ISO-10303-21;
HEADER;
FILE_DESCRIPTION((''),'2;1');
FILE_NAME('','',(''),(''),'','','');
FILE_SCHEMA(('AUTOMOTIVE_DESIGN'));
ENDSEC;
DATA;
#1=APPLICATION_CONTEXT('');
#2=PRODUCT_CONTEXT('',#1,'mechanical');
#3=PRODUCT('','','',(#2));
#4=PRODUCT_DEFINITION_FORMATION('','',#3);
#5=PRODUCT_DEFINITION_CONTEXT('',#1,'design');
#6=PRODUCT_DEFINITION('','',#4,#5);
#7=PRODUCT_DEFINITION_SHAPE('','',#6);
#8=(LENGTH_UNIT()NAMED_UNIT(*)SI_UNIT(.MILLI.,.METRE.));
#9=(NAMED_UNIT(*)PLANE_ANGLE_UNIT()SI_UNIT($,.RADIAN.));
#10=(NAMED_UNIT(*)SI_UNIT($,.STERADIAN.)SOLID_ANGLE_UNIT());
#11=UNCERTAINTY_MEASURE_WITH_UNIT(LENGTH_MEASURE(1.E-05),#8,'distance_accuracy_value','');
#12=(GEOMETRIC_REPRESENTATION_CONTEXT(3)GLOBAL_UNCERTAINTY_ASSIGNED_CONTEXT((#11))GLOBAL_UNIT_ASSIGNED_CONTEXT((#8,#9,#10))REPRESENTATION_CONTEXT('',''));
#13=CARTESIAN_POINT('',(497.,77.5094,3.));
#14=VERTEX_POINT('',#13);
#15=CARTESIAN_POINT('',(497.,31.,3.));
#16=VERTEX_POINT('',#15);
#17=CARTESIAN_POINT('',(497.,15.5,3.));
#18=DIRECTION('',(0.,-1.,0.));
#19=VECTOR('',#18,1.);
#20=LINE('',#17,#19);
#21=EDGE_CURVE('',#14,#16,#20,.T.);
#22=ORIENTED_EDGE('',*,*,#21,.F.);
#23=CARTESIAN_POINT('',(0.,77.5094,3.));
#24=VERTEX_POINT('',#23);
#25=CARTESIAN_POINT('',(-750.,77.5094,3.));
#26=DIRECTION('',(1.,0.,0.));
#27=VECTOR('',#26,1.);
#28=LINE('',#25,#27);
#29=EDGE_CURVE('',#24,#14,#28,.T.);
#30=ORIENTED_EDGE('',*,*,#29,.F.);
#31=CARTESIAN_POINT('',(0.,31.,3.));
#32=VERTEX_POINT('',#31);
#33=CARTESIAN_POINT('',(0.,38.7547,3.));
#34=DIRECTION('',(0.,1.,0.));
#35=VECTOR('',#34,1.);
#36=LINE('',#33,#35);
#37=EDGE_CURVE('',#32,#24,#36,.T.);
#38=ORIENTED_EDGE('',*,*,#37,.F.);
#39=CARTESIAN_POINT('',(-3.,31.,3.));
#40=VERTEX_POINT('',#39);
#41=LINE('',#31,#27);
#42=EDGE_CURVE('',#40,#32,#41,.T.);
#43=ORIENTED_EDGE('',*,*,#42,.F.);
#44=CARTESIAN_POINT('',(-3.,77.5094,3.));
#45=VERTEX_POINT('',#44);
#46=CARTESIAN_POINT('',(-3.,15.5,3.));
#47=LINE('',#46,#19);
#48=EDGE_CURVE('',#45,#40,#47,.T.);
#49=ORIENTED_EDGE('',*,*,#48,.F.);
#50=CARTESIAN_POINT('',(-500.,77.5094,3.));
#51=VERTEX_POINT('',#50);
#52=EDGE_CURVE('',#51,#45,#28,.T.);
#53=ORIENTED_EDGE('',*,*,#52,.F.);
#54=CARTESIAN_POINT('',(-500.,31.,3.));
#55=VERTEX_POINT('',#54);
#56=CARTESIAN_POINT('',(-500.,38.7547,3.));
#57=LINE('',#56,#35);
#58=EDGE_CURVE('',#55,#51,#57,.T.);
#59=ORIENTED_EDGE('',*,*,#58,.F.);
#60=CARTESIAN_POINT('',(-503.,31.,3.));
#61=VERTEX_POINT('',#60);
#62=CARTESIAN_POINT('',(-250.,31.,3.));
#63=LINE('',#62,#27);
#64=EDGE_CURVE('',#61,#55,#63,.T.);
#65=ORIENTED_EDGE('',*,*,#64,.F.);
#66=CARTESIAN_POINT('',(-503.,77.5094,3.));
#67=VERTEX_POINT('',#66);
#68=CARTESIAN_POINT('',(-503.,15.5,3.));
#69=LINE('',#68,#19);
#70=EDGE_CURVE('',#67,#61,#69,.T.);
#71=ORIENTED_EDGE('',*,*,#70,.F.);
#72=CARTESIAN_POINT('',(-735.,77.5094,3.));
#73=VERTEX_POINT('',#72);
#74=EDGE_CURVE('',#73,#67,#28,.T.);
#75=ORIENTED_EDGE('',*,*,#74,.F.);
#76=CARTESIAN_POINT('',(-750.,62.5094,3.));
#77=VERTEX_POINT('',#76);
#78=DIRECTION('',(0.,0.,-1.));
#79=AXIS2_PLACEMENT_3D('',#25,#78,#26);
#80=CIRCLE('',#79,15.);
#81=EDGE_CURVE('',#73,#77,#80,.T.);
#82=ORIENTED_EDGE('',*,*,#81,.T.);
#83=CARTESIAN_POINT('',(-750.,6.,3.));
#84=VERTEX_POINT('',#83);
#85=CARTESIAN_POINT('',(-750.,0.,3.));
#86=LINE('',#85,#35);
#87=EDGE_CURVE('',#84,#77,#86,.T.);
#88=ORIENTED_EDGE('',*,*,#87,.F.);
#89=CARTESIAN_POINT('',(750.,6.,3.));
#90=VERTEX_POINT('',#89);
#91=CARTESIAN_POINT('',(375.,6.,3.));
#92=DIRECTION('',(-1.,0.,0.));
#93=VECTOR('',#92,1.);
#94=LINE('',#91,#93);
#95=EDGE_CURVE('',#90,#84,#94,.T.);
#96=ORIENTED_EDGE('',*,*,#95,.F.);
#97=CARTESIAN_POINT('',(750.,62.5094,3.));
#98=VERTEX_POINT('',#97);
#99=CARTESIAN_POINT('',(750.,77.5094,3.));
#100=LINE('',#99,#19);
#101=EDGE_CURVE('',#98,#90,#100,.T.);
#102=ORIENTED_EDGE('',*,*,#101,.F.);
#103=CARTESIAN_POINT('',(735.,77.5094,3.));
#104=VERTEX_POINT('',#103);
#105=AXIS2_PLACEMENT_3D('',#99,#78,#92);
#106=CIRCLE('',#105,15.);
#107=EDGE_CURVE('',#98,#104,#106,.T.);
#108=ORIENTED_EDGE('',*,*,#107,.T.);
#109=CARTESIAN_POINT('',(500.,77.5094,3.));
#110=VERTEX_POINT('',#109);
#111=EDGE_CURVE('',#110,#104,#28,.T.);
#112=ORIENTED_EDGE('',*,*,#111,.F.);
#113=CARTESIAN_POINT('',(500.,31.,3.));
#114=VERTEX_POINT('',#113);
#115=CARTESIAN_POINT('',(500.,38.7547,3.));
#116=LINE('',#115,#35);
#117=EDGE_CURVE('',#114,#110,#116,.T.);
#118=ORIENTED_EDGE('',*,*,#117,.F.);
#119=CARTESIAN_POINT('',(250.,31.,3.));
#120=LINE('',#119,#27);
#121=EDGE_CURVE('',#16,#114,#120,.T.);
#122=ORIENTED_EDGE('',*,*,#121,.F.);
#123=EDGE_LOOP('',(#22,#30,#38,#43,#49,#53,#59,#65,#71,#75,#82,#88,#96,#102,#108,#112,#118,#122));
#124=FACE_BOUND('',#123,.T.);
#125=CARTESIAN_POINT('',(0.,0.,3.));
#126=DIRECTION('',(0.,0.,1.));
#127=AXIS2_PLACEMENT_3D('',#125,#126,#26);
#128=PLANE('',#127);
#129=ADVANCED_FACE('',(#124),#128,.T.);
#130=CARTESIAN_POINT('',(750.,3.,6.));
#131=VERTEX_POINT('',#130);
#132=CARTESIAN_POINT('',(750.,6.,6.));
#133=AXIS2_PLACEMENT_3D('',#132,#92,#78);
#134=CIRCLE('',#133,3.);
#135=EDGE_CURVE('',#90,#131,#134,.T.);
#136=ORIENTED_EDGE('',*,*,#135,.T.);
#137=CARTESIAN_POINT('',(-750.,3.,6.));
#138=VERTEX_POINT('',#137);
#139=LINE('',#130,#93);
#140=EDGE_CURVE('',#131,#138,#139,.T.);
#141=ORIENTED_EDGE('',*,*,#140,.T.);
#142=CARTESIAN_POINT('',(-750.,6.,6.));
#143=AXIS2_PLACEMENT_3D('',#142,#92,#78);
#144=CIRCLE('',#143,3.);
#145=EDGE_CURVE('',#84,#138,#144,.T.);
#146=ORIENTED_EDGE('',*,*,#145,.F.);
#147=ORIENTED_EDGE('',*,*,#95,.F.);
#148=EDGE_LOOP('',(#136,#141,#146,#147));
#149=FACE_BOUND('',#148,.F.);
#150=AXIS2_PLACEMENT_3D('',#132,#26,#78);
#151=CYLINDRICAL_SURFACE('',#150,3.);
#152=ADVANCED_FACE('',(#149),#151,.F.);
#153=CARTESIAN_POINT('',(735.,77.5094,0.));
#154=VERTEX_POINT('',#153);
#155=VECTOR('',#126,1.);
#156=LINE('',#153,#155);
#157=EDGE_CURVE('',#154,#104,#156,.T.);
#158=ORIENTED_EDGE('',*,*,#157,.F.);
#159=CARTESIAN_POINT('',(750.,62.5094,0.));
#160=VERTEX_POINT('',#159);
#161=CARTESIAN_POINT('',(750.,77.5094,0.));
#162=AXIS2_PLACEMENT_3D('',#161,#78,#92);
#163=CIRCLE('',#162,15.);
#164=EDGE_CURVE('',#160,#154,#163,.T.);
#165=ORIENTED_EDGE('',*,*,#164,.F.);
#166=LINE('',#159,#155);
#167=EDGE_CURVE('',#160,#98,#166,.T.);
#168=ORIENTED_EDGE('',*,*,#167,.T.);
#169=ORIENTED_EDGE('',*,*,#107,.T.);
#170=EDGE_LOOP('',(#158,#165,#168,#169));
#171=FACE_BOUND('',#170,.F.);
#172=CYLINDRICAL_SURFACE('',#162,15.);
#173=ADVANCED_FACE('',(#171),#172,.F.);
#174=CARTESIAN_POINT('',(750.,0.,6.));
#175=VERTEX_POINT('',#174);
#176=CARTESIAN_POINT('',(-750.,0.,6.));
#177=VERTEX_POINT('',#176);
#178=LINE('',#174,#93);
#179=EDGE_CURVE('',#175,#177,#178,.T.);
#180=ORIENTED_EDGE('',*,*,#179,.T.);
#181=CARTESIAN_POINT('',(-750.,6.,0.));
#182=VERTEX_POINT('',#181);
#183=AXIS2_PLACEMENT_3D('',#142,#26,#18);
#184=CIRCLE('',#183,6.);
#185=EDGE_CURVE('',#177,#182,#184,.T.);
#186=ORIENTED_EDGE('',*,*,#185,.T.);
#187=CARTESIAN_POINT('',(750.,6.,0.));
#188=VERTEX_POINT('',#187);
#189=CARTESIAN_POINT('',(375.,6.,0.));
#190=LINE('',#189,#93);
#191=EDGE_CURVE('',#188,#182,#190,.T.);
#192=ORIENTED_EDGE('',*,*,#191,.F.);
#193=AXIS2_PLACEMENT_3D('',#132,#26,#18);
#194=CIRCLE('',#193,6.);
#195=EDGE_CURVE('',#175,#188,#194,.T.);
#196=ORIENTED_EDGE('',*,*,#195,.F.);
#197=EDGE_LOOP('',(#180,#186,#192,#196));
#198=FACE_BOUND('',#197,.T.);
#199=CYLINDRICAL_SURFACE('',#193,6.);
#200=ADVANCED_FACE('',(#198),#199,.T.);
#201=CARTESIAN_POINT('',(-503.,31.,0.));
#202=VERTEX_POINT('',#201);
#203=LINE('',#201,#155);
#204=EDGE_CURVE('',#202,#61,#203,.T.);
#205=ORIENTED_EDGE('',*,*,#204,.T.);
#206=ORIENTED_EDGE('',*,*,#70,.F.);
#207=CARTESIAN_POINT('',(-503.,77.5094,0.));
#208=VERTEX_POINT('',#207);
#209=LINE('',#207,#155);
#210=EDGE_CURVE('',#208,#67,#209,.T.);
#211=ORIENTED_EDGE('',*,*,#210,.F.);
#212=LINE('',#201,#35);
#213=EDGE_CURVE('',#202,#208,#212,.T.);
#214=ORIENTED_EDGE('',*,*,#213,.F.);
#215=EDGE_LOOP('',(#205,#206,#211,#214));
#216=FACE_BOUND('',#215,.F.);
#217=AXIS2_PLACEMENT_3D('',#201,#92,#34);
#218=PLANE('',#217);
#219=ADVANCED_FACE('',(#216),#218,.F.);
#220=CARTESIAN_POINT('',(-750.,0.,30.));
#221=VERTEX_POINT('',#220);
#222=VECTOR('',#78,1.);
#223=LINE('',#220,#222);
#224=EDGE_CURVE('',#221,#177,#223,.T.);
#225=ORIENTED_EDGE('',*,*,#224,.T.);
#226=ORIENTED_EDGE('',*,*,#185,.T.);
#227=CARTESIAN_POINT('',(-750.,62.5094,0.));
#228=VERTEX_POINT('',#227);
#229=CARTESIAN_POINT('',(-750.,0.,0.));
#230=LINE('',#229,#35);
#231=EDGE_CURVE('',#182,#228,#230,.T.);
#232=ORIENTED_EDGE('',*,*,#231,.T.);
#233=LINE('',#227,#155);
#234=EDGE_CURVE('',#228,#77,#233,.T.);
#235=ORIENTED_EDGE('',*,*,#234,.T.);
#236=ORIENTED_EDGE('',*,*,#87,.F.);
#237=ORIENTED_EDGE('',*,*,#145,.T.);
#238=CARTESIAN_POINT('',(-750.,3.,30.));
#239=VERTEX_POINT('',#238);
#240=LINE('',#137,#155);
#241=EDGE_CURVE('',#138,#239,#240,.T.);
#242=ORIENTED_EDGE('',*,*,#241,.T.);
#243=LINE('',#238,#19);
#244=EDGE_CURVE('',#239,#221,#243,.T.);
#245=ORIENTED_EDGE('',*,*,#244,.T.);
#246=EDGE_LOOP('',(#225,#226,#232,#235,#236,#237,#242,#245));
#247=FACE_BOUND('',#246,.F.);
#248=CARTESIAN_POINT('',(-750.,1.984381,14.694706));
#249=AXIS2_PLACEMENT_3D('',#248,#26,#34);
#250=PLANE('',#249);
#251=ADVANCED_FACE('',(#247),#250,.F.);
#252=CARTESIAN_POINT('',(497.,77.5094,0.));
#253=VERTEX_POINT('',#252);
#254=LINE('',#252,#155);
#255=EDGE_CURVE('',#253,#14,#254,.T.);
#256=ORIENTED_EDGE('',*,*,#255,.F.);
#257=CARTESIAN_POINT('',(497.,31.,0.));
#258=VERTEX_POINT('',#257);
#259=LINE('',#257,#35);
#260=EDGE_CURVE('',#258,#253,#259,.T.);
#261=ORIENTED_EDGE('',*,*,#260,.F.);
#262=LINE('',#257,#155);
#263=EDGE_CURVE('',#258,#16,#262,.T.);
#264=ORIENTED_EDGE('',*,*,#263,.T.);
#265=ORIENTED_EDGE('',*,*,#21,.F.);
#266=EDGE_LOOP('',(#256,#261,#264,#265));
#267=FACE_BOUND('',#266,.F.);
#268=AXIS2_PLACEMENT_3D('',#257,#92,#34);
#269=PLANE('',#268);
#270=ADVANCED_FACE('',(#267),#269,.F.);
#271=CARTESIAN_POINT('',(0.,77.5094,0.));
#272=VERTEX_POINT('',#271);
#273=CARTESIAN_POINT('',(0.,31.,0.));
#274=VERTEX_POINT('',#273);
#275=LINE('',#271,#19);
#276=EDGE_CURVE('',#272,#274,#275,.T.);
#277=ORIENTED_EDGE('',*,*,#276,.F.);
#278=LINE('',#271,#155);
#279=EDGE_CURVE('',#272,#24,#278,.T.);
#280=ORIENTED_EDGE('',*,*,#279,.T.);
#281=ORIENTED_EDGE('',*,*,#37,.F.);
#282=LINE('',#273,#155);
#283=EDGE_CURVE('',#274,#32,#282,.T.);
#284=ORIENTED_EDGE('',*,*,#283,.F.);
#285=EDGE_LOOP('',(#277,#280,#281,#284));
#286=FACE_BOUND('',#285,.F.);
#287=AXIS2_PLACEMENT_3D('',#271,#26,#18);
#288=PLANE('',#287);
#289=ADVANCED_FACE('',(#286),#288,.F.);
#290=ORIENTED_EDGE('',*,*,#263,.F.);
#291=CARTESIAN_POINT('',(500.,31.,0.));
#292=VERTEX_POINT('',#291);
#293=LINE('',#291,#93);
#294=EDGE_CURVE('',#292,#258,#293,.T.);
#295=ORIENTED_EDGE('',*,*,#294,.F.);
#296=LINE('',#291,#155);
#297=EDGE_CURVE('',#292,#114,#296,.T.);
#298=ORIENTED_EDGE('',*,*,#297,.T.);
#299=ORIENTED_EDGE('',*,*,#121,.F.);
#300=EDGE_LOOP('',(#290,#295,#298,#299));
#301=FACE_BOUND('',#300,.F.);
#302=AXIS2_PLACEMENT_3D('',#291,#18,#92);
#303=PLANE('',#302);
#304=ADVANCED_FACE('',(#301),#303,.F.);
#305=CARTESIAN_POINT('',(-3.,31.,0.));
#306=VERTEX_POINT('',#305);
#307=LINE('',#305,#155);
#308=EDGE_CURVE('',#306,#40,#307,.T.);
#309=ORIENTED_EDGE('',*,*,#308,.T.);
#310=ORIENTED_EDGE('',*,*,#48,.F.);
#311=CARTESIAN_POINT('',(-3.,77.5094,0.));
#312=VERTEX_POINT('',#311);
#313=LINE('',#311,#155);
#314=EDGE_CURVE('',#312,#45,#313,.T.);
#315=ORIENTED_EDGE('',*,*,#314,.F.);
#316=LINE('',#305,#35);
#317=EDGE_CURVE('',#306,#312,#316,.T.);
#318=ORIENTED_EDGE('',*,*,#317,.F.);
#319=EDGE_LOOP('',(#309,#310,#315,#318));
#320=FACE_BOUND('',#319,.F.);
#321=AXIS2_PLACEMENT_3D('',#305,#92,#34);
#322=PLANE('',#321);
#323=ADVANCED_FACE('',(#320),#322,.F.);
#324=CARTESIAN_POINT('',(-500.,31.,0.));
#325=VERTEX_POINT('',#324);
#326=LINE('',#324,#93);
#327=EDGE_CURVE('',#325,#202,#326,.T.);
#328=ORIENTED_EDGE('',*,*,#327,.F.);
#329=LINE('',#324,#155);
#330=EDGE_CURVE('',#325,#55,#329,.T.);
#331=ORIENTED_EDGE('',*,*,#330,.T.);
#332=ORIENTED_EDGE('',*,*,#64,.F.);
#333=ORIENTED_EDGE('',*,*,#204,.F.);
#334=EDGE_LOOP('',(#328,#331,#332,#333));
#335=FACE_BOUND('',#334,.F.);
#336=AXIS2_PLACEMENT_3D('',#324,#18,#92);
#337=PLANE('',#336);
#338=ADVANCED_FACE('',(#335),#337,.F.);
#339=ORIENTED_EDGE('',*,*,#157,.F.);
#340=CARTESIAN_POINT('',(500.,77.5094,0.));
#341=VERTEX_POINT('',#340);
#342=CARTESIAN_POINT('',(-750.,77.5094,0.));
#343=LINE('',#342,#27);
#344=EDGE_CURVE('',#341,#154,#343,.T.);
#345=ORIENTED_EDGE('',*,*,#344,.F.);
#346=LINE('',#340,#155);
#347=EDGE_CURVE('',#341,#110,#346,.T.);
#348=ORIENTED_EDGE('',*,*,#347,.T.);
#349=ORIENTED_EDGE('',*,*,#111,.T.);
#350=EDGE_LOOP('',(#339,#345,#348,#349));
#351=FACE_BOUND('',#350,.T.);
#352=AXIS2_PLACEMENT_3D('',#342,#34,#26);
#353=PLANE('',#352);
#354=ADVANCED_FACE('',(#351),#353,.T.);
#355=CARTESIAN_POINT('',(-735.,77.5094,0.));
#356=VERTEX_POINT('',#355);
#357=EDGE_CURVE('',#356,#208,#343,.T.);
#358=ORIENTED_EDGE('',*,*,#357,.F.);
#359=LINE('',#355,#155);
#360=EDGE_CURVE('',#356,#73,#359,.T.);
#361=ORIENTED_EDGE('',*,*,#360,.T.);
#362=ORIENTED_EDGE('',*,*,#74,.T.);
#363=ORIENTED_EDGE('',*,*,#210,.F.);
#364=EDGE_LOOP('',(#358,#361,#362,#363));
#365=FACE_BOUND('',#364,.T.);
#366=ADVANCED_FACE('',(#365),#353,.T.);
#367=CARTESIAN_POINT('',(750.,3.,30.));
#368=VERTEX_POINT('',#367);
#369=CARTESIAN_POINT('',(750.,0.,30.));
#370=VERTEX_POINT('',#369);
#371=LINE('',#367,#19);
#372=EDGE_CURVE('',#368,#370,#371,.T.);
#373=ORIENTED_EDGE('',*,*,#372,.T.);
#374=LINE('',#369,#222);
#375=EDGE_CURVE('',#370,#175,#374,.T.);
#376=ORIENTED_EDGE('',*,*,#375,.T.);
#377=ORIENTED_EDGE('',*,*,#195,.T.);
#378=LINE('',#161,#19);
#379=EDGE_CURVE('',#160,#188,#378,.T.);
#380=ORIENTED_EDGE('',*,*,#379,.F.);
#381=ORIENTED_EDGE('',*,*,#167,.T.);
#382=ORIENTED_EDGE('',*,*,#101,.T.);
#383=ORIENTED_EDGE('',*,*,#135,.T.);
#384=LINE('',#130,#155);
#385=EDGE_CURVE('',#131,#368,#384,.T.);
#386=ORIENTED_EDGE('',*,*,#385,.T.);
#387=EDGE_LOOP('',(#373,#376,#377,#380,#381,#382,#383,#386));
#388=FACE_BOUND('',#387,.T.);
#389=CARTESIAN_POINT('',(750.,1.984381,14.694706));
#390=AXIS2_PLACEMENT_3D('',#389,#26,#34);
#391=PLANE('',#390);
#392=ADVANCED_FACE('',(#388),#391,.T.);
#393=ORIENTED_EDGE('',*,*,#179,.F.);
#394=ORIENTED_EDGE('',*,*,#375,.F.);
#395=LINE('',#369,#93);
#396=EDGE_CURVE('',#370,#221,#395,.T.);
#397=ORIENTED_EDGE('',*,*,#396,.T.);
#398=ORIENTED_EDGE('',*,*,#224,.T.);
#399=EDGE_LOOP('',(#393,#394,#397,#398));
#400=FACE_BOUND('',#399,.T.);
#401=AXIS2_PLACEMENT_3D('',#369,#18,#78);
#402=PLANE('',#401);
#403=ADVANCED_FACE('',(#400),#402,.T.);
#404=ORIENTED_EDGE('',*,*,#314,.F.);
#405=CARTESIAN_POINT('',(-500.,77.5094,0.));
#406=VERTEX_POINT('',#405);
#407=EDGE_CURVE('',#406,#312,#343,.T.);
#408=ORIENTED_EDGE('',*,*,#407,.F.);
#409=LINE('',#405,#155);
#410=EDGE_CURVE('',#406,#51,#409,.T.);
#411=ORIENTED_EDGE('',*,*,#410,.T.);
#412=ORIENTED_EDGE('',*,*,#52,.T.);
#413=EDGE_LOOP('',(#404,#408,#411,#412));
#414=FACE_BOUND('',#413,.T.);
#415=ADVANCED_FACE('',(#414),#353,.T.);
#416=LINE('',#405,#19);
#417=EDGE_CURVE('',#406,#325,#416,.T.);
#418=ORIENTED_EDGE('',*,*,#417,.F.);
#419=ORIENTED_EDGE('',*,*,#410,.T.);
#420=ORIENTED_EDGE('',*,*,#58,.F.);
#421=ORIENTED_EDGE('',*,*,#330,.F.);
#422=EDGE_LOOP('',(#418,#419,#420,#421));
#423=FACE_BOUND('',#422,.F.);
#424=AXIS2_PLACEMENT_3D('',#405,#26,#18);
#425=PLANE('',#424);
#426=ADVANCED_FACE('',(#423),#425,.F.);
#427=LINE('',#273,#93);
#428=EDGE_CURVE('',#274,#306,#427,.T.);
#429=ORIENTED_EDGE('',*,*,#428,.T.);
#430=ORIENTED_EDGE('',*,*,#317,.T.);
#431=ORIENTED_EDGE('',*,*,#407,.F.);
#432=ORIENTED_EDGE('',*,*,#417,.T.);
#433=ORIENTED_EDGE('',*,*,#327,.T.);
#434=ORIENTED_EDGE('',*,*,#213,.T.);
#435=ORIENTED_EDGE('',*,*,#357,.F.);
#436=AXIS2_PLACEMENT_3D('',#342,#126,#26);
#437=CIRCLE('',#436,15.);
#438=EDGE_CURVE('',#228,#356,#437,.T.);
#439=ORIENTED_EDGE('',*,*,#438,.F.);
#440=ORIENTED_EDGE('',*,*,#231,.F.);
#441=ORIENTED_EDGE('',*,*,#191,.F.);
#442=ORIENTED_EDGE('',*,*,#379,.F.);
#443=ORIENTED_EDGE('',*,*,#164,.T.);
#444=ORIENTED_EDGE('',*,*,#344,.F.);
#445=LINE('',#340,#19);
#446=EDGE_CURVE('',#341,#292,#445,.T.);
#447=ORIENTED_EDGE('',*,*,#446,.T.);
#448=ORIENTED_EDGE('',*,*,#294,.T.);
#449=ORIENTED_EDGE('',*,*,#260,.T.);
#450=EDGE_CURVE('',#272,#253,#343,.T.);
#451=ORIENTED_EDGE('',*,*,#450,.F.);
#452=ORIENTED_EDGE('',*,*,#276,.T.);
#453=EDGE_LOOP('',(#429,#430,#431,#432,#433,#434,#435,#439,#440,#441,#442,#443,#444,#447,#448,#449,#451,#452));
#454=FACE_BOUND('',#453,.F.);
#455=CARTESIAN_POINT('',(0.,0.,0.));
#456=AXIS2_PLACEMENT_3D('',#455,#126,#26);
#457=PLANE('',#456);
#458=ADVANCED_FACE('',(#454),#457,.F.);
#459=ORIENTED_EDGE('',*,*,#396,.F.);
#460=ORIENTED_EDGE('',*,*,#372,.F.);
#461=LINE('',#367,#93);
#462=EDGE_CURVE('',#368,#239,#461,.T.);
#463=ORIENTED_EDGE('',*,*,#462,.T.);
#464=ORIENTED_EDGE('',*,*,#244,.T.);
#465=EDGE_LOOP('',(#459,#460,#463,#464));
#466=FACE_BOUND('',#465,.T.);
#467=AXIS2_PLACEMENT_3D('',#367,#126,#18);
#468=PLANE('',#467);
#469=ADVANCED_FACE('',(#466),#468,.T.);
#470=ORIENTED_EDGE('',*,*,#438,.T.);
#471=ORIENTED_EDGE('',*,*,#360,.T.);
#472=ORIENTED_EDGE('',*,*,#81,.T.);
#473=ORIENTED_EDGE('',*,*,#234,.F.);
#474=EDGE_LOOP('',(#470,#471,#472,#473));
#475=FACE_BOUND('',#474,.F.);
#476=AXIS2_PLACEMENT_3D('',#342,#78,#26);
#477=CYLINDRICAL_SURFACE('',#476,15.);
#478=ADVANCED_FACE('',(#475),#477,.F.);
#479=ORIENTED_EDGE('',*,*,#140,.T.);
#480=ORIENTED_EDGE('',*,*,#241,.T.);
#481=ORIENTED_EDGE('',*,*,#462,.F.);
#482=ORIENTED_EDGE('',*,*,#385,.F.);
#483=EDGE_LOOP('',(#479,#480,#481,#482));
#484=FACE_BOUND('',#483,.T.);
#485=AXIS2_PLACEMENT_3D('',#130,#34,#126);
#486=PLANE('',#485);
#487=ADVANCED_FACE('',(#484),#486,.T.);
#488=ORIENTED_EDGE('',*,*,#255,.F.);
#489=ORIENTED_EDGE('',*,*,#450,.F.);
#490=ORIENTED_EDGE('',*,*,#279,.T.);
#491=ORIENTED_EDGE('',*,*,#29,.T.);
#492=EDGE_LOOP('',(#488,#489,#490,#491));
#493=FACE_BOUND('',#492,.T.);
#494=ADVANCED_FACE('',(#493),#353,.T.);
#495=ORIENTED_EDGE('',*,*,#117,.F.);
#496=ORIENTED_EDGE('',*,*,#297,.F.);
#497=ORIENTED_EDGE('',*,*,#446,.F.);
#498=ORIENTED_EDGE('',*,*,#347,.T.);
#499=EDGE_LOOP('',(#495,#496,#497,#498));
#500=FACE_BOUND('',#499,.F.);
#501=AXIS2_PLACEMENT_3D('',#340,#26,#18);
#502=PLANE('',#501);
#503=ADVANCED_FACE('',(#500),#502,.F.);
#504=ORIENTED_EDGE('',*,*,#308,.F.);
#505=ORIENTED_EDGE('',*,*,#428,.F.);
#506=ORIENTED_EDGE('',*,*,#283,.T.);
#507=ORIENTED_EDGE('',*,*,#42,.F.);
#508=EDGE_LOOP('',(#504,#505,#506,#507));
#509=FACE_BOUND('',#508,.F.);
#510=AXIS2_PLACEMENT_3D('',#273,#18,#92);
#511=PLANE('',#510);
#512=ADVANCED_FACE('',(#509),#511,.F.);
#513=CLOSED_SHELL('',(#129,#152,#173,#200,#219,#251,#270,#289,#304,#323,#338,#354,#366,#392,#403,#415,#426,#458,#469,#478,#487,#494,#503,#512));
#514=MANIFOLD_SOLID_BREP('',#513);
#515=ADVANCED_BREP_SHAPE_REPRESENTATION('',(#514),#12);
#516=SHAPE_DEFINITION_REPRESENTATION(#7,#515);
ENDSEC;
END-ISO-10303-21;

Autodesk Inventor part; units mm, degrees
ref_plane "YZ Plane" through (0, 0, 0) normal (1, 0, 0) x (0, 1, 0)
ref_plane "XZ Plane" through (0, 0, 0) normal (0, 1, 0) x (-1, 0, 0)
ref_plane "XY Plane" through (0, 0, 0) normal (0, 0, 1) x (1, 0, 0)
sketch "Sketch1" plane through (0, 0, 0) normal (0, 0, 1) x (1, 0, 0)
  line L0 (-750, 77.5094) -> (750, 77.5094)
  line L1 (750, 77.5094) -> (750, 0)
  line L2 (750, 0) -> (-750, 0)
  line L3 (-750, 0) -> (-750, 77.5094)
  point P0 (0, 0)
  point P1 (0, 0)
  dimension "d0" = 1500
  dimension "d1" = 77.5094
extrude "Plate1" add sketch "Sketch1" along normal blind 3
sketch "Sketch2" plane through (750, 3, 0) normal (0, -1, 0) x (1, 0, 0)
  line L0 (-1500, 0) -> (0, 0)
  line L1 (0, 0) -> (0, 30)
  line L2 (0, 30) -> (-1500, 30)
  line L3 (-1500, 30) -> (-1500, 0)
edge flange "Flange1" height 30 angle 90 thickness 3 bend radius 3 thickness toward (0, -1, 0) relief tear relief width 3 relief depth 1.5 edges at (0, 0, 3) wall of the first edge with corners at (-750, 3, 0) (750, 3, 0) (750, 3, 30) (-750, 3, 30)
bend "Bend1"
corner "Corner1"
sketch "Sketch5" plane through (0, 0, 0) normal (0, 0, -1) x (-1, 0, 0)
  line L0 (750, 77.5094) -> (-750, 77.5094) projected
  line L1 (500, 77.5094) -> (500, 31)
  line L2 (500, 31) -> (503, 31)
  line L3 (503, 31) -> (503, 77.5094)
  line L4 (750, 0) -> (-750, 0) projected
  point P0 (0, 0)
  dimension "d18" = 3
  dimension "d19" = 247
  dimension "d20" = 31
extrude "Extrusion1" cut sketch "Sketch5" against normal through all
pattern_linear "Rectangular Pattern1" count 3 spacing 500 along (1, 0, 0) of "Extrusion1"
sketch "Sketch6" plane through (0, 0, 0) normal (0, 0, -1) x (-1, 0, 0)
  line L0 (-750, 77.5094) -> (-750, 6) projected
  circle A0 centre (-750, 77.5094) radius 15
  line L1 (-750, 77.5094) -> (-500, 77.5094) projected
  point P0 (0, 0)
  point P1 (-735, 77.5094)
  point P2 (-750, 62.5094)
  dimension "d24" = 30
extrude "Extrusion2" cut sketch "Sketch6" against normal through all contours L1 A0 L0 picked at (-740.1254, 76.3968)
mirror "Mirror1" about plane through (0, 0, 0) normal (1, 0, 0) of "Extrusion2"
equation "\"d1\" = Стрингер_6"
equation "\"d18\" = Thickness"
equation "\"d2\" = Thickness"
equation "\"d3\" = BendReliefWidth"
equation "\"d4\" = BendReliefDepth"
equation "\"d5\" = MinimumRemnant"
equation "\"d6\" = TransitionRadius"
equation "\"d9\" = BendRadius"
equation "\"d10\" = CornerReliefSize"
equation "\"d11\" = GapSize"
equation "\"d12\" = JacobiRadiusSize"
equation "\"BendRadius\" = Thickness"
equation "\"BendReliefWidth\" = Thickness"
equation "\"BendReliefDepth\" = 0.5 * Thickness"
equation "\"CornerReliefSize\" = 4 * Thickness"
equation "\"MinimumRemnant\" = 2 * Thickness"
equation "\"TransitionRadius\" = BendRadius"
equation "\"JacobiRadiusSize\" = BendRadius"
equation "\"GapSize\" = Thickness"
equation "\"Стрингер_6\" = 77.509374"
equation "\"Thickness\" = 3"
properties part number "МОО 056 стрингер борт 61"
